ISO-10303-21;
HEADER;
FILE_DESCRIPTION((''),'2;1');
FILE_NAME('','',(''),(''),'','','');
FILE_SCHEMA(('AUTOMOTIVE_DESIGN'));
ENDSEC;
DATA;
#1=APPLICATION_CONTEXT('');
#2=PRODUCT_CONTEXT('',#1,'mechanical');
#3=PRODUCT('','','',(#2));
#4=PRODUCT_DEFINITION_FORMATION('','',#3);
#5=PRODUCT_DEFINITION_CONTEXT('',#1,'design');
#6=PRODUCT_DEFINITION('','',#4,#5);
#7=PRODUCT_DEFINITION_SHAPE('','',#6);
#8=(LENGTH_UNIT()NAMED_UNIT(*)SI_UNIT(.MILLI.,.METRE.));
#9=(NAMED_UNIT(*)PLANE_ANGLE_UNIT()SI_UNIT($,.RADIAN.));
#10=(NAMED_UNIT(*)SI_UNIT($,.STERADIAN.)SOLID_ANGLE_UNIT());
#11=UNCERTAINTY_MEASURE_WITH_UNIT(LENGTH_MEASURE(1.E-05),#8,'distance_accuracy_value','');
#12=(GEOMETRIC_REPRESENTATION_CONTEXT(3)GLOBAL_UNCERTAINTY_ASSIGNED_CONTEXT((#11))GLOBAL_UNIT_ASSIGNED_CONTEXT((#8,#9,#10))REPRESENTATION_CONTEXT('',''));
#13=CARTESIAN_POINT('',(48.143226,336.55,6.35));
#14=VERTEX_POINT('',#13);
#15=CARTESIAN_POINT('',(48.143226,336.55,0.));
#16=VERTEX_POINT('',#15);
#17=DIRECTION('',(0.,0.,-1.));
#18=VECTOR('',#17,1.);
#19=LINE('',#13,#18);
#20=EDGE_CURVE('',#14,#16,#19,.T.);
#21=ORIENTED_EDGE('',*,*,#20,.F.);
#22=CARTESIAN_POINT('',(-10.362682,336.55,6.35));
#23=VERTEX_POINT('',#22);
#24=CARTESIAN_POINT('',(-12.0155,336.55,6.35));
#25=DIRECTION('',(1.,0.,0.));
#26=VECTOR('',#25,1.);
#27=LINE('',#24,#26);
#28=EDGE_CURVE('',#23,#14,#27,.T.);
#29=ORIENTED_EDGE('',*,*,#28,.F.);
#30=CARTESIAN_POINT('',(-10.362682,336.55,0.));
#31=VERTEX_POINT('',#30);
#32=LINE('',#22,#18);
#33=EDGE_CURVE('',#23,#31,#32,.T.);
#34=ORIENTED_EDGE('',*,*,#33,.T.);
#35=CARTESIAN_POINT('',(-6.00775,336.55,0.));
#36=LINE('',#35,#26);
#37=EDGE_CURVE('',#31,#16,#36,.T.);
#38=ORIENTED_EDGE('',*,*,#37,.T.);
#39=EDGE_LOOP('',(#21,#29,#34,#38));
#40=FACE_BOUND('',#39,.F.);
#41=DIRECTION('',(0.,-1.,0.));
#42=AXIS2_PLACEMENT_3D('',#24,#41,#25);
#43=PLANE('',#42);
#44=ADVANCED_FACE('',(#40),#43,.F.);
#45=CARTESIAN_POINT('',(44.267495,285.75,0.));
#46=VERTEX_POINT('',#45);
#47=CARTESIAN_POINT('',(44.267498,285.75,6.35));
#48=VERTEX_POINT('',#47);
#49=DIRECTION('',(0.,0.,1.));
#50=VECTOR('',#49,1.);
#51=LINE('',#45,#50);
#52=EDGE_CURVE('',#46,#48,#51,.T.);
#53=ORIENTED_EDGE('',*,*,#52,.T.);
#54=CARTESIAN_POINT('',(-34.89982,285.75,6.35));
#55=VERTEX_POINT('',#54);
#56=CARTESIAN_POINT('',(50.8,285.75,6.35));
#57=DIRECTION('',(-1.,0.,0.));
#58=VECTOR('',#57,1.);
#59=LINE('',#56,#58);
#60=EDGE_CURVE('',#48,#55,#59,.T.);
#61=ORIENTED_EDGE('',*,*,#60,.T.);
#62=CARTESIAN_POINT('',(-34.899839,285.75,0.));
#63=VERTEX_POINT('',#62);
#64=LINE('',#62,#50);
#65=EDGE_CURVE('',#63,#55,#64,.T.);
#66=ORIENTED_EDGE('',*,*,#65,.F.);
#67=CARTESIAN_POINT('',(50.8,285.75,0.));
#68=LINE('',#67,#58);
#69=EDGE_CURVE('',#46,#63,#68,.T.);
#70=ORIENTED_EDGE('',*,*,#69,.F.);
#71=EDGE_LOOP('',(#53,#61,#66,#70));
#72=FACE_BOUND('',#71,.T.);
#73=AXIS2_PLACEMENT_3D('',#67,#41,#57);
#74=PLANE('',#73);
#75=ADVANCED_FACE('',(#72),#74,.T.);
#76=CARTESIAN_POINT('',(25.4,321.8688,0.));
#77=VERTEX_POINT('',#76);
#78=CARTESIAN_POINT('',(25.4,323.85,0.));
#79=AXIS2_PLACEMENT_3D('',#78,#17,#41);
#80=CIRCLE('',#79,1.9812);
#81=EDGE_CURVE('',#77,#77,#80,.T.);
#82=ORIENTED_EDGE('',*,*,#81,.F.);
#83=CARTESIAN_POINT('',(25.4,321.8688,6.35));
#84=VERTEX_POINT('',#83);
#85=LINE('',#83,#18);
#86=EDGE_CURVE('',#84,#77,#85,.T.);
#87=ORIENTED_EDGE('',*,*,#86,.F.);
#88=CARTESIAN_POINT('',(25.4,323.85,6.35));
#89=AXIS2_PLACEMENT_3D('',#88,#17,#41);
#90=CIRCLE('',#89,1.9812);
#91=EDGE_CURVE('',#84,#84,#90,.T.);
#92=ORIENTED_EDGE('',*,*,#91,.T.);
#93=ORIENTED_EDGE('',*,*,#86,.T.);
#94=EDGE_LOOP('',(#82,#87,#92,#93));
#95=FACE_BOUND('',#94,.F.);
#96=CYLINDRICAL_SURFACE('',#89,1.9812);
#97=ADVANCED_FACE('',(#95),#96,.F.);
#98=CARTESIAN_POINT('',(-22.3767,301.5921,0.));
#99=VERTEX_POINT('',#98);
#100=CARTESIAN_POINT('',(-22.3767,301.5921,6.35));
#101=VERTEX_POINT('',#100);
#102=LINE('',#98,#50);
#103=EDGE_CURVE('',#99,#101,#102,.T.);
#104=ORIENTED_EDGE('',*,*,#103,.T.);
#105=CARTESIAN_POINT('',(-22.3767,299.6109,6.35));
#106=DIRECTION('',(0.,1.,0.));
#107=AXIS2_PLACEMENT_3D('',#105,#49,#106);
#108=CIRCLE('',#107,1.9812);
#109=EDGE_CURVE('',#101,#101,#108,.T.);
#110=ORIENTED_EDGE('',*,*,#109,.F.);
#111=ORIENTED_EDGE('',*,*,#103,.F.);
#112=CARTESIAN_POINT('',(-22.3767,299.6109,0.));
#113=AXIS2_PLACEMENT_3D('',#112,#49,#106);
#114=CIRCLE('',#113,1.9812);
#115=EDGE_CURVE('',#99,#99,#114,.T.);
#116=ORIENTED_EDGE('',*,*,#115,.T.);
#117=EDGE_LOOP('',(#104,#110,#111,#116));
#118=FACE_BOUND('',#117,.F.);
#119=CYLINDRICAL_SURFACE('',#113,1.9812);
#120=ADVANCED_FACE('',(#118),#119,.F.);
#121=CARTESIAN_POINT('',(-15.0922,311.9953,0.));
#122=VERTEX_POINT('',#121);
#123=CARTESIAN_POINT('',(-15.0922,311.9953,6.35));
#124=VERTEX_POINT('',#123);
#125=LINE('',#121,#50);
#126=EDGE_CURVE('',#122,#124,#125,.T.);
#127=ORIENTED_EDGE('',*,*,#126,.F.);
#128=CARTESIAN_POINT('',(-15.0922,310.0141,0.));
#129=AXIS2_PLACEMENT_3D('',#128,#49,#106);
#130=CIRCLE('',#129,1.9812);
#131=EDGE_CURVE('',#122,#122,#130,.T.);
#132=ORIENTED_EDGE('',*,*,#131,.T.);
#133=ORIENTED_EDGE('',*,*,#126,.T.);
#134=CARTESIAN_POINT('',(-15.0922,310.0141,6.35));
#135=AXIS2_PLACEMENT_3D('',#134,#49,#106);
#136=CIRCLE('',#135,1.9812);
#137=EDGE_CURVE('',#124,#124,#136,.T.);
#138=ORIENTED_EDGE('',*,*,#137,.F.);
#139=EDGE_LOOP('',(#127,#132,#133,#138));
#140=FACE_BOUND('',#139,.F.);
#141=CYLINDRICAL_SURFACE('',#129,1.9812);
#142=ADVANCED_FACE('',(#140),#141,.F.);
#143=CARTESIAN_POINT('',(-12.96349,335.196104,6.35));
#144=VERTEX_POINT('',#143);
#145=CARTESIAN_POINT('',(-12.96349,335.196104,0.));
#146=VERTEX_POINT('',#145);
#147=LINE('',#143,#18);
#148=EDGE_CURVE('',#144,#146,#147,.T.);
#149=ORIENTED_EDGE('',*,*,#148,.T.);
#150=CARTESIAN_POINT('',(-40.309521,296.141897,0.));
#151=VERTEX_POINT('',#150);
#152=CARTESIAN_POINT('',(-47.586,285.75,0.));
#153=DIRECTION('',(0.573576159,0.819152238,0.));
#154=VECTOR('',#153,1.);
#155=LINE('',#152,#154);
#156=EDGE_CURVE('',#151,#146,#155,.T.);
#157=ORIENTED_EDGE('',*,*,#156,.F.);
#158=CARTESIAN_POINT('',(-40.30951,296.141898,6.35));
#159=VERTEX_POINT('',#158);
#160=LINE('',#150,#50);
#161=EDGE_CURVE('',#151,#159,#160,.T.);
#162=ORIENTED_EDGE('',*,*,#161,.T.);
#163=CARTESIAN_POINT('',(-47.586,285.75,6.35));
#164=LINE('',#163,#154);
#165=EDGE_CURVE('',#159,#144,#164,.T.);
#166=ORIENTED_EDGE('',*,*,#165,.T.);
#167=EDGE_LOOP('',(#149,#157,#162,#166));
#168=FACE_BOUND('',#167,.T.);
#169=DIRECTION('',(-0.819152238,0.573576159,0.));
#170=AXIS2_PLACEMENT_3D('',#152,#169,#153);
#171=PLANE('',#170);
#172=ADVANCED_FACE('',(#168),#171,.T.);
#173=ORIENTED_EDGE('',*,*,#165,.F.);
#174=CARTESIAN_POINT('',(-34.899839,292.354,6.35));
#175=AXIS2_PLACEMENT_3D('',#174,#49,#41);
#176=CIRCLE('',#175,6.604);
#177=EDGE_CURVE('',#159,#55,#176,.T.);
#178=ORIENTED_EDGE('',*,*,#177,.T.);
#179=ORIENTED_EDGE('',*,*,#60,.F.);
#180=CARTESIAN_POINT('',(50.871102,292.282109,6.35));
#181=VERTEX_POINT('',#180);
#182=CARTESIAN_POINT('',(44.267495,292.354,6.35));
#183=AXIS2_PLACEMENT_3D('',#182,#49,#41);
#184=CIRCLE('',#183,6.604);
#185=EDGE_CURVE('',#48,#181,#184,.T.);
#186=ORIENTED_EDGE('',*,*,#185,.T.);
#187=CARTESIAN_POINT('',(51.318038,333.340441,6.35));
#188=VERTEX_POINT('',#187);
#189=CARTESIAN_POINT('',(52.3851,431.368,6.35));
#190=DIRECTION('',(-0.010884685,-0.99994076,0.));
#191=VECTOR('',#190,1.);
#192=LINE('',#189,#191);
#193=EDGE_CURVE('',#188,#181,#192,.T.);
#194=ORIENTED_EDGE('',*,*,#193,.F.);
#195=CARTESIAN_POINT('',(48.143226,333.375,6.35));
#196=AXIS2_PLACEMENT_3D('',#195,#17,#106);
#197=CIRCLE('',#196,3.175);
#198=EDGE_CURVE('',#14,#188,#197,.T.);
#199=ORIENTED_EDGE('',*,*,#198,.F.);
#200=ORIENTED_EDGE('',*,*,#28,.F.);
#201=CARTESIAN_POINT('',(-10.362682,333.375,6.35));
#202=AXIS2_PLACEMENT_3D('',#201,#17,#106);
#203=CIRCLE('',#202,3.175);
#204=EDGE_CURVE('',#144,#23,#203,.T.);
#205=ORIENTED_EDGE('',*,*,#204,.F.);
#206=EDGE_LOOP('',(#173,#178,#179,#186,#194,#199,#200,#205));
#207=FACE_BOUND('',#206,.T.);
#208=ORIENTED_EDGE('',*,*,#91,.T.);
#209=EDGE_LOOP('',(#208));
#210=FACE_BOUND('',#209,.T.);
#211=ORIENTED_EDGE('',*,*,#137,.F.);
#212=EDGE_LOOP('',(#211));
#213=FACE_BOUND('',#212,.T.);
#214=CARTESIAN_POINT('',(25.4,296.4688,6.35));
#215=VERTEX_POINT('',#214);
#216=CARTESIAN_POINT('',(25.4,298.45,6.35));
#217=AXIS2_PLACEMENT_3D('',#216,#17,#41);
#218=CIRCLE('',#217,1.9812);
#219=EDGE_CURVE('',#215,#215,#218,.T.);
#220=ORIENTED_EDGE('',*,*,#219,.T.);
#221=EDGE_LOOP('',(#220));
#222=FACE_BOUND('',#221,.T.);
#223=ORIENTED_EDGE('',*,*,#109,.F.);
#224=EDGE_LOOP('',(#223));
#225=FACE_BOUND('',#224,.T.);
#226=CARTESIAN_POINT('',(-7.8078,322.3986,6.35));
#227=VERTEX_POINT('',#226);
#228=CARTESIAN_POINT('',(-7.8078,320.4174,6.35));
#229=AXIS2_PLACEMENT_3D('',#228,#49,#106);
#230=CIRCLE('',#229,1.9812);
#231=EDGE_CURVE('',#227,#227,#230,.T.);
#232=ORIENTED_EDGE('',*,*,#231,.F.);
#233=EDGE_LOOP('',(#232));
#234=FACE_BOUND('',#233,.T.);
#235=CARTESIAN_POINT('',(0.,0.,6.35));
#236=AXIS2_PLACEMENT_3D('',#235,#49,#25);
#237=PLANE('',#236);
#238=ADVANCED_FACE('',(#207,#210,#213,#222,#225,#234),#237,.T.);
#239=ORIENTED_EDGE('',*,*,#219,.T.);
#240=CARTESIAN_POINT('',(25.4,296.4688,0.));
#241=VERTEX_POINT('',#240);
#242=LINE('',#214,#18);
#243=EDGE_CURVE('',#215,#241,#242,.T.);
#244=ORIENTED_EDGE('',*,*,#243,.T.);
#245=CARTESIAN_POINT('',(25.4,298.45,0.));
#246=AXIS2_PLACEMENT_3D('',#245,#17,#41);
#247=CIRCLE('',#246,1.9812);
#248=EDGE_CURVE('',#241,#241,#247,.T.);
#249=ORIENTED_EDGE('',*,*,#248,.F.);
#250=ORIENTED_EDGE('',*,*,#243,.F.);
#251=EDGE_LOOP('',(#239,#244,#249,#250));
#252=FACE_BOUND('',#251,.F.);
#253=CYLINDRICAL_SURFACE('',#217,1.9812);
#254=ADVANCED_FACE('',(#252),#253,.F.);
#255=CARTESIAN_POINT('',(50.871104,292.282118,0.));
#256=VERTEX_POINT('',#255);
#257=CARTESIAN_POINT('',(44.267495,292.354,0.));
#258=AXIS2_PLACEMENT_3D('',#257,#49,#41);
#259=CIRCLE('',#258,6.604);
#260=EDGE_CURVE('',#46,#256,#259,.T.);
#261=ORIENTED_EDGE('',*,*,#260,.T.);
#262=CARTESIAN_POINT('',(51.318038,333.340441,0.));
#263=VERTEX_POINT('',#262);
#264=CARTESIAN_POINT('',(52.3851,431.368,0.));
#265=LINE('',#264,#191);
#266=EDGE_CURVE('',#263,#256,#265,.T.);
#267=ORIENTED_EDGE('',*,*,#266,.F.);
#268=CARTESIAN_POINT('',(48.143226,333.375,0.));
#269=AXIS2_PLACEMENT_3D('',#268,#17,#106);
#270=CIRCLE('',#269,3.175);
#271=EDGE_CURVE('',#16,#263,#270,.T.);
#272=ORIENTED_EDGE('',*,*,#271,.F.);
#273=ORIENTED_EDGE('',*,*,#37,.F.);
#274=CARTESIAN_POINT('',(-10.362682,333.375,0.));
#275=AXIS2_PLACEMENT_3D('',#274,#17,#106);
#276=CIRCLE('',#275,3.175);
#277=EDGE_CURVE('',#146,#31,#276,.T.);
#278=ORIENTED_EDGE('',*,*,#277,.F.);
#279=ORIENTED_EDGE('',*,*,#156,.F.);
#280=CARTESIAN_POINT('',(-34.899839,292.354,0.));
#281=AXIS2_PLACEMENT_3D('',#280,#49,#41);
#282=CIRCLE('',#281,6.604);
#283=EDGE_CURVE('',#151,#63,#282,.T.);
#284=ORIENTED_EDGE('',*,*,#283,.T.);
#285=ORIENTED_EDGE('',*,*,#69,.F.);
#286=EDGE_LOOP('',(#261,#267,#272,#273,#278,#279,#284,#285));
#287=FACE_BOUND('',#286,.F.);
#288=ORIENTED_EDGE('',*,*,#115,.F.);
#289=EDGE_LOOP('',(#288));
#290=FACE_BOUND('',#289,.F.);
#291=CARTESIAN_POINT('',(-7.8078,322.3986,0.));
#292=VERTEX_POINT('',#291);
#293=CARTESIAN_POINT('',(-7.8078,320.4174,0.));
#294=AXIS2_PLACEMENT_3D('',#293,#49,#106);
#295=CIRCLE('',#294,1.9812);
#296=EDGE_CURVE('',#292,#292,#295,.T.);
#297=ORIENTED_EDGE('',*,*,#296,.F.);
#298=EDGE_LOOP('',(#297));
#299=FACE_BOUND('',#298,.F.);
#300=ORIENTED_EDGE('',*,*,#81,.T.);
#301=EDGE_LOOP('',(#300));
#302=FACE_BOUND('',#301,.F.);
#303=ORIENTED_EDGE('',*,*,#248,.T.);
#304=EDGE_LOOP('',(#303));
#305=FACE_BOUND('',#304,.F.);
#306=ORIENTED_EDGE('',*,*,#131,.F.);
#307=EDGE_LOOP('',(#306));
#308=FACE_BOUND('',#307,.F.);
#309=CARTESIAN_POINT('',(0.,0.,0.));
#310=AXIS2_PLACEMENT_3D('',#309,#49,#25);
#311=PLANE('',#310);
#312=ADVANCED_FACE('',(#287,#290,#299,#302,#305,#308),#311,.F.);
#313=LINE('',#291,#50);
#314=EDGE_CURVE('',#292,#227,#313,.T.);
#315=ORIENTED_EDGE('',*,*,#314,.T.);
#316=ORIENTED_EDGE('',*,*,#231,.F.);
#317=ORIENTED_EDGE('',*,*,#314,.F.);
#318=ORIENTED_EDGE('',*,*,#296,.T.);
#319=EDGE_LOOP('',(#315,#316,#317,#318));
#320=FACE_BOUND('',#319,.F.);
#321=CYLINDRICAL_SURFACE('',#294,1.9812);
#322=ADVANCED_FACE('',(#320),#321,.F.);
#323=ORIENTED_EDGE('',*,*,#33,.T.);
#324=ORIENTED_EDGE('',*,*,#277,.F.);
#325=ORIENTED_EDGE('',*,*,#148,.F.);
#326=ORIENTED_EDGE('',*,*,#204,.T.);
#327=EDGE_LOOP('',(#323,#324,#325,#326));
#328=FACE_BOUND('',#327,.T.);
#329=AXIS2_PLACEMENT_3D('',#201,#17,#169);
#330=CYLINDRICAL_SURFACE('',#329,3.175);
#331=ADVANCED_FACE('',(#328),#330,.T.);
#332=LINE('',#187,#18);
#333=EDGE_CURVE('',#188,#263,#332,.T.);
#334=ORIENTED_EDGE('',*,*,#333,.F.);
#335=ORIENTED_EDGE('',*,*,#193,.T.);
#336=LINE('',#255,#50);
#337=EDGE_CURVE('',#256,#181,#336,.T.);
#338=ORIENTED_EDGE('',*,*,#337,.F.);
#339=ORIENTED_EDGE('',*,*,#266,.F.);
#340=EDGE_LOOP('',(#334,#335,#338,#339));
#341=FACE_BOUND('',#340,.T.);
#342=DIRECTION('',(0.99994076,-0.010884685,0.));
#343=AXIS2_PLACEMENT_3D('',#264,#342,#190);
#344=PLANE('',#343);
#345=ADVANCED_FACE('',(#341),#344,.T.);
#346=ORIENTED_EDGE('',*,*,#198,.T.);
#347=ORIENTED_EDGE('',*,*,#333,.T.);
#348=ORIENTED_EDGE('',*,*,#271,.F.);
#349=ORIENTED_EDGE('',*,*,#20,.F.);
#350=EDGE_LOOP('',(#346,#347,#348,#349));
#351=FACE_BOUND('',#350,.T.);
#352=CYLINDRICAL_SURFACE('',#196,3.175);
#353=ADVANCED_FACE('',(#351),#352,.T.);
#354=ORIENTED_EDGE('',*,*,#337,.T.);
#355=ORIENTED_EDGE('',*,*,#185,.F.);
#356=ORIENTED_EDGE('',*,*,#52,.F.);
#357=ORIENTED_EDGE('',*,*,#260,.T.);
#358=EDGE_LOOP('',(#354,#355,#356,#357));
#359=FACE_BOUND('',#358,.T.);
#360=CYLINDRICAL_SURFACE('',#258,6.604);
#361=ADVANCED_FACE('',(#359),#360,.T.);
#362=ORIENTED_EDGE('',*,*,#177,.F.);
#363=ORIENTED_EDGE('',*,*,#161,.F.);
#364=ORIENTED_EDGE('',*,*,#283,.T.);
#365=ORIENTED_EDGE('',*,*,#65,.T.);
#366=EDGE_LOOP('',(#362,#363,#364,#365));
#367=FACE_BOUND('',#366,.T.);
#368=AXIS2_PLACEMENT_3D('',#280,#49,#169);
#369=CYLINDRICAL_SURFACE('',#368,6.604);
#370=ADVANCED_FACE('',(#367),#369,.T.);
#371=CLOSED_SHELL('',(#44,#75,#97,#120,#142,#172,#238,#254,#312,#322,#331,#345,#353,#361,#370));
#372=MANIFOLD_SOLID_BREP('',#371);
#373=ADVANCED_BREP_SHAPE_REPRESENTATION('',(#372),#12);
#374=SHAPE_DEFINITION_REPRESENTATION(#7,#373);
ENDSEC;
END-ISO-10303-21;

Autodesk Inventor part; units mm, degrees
ref_plane "YZ Plane" through (0, 0, 0) normal (1, 0, 0) x (0, 1, 0)
ref_plane "XZ Plane" through (0, 0, 0) normal (0, 1, 0) x (-1, 0, 0)
ref_plane "XY Plane" through (0, 0, 0) normal (0, 0, 1) x (1, 0, 0)
sketch "Sketch1" plane through (0, 0, 0) normal (0, 0, 1) x (1, 0, 0)
  line L0 (0, 0) -> (50.8, 0) construction
  line L1 (50.8, 0) -> (50.8, 387.35) construction
  line L2 (50.8, 387.35) -> (0, 387.35) construction
  line L3 (0, 387.35) -> (0, 0) construction
  line L4 (20.8065, 339.141) -> (-226.8638, -14.5688) construction
  line L5 (-226.8638, -14.5688) -> (-247.6703, 0) construction
  line L6 (-247.6703, 0) -> (0, 353.7099) construction
  line L7 (0, 353.7099) -> (20.8065, 339.141) construction
  line L8 (-247.6703, 0) -> (-216.6626, 0) construction
  line L9 (0, 353.7099) -> (0, 309.4263) construction
  dimension "d0" = 50.8
  dimension "d1" = 387.35
  dimension "d2" = 25.4
  dimension "d3" = 431.8
  dimension "d5" = 55
sketch "Sketch2" plane through (0, 0, 0) normal (0, 0, 1) x (1, 0, 0)
  line L0 (0, 0) -> (50.8, 0) construction
  line L1 (50.8, 0) -> (50.8, 387.35) construction
  line L2 (50.8, 387.35) -> (0, 387.35) construction
  line L3 (0, 387.35) -> (0, 0) construction
  line L4 (20.8065, 339.141) -> (-226.8638, -14.5688) construction
  line L5 (-226.8638, -14.5688) -> (-247.6703, 0) construction
  line L6 (-247.6703, 0) -> (0, 353.7099) construction
  line L7 (0, 353.7099) -> (20.8065, 339.141) construction
  line L8 (-247.6703, 0) -> (-216.6626, 0) construction
  line L9 (0, 353.7099) -> (0, 309.4263) construction
  circle A0 centre (12.7, 431.8) radius 11.176
  circle A1 centre (12.7, 431.8) radius 23.8125 construction
  circle A2 centre (12.7, 431.8) radius 39.6875 construction
  line L10 (-47.586, 285.75) -> (0, 353.7099)
  line L11 (0, 387.35) -> (0, 353.7099)
  line L12 (0, 387.35) -> (-16.2292, 404.6302)
  line L13 (52.3851, 431.368) -> (50.8, 285.75)
  line L14 (50.8, 285.75) -> (-47.586, 285.75)
  arc A3 (52.3851, 431.368) -> (-16.2292, 404.6302) centre (12.7, 431.8) ccw
  line L15 (12.7, 374.65) -> (38.1, 374.65) construction
  line L16 (10.4032, 346.4254) -> (-237.2671, -7.2844) construction
  point P0 (25.4, 0)
  point P1 (-7.8078, 320.4174)
  point P2 (-15.0922, 310.0141)
  point P3 (-22.3767, 299.6109)
  point P4 (25.4, 374.65)
  point P5 (25.4, 374.65)
  point P6 (25.4, 387.35)
  dimension "d6" = 22.352
  dimension "d7" = 47.625
  dimension "d8" = 15.875
  dimension "d10" = 12.7
  dimension "d11" = 431.8
  dimension "d12" = 101.6
  dimension "d13" = 25.4
  dimension "d14" = 12.7
  dimension "d15" = 12.7
  dimension "d16" = 12.7
  dimension "d56" = 31.75
extrude "Extrusion1" add sketch "Sketch2" along normal blind 6.35
hole "Hole1" at (0, 0, 0) at (50.8, 0, 0) at (-226.8638, -14.5688, 0) at (-247.6703, 0, 0) at (-216.6626, 0, 0) at (-7.8078, 320.4174, 0) at (-15.0922, 310.0141, 0) at (-22.3767, 299.6109, 0) at (12.7, 374.65, 0) at (25.4, 374.65, 0) at (38.1, 374.65, 0) direction (0, 0, 1) diameter 3.9624 end through all thread size "10-32 UNF" class "2B" standard "ANSI Unified Screw Threads"
fillet "Fillet1" radius 6.604 3 edges at (0, 353.7099, 3.175) (-47.586, 285.75, 3.175) (50.8, 285.75, 3.175)
sketch "Sketch3" plane through (0, 0, 0) normal (0, 0, -1) x (-1, 0, 0)
  arc A0 (-50.8711, 292.2821) -> (-44.2675, 285.75) centre (-44.2675, 292.354) ccw construction
  line L0 (34.8998, 285.75) -> (-44.2675, 285.75) construction
  arc A1 (34.8998, 285.75) -> (40.3095, 296.1419) centre (34.8998, 292.354) ccw construction
  line L1 (1.1943, 352.0042) -> (40.3095, 296.1419) construction
  arc A2 (0, 355.7921) -> (1.1943, 352.0042) centre (6.604, 355.7921) ccw construction
  line L2 (0, 387.35) -> (0, 355.7921) construction
  line L3 (16.2292, 404.6302) -> (0, 387.35) construction
  arc A3 (16.2292, 404.6302) -> (-52.3851, 431.368) centre (-12.7, 431.8) ccw construction
  line L4 (-50.8711, 292.2821) -> (-52.3851, 431.368) construction
  circle A4 centre (-25.4, 374.65) radius 1.9812 construction
  circle A5 centre (22.3767, 299.6109) radius 1.9812 construction
  circle A6 centre (7.8078, 320.4174) radius 1.9812 construction
  circle A7 centre (15.0922, 310.0141) radius 1.9812 construction
  circle A8 centre (-12.7, 374.65) radius 1.9812 construction
  circle A9 centre (-38.1, 374.65) radius 1.9812 construction
  circle A10 centre (-12.7, 431.8) radius 11.176 construction
  circle A11 centre (-12.7, 431.8) radius 23.8125
  circle A12 centre (-12.7, 431.8) radius 11.176 construction
  circle A13 centre (-12.7, 431.8) radius 31.75 construction
  point P0 (0, 0)
  point P1 (-12.7, 463.55)
  point P2 (-44.45, 431.8)
  point P3 (-12.7, 400.05)
  point P4 (19.05, 431.8)
  dimension "d29" = 63.5
  dimension "d28" = 47.625
  dimension "d32" = 360
extrude "Extrusion2" cut sketch "Sketch3" against normal blind 3.175
hole "Hole2" at (12.7, 463.55, 0) at (44.45, 431.8, 0) at (12.7, 400.05, 0) at (-19.05, 431.8, 0) direction (0, 0, 1) diameter 3.9624 end through all thread size "10-32 UNF" class "2B" standard "ANSI Unified Screw Threads"
sketch "Sketch4" plane through (0, 0, 6.35) normal (0, 0, 1) x (1, 0, 0)
  line L0 (-1.1943, 352.0042) -> (-40.3095, 296.1419) projected
  line L1 (-12.0155, 336.55) -> (51.353, 336.55)
  line L2 (50.8711, 292.2821) -> (52.3851, 431.368) projected
  line L3 (-34.8998, 285.75) -> (44.2675, 285.75) projected
  arc A0 (-40.3095, 296.1419) -> (-34.8998, 285.75) centre (-34.8998, 292.354) ccw projected
  arc A1 (44.2675, 285.75) -> (50.8711, 292.2821) centre (44.2675, 292.354) ccw projected
  point P0 (0, 0)
  dimension "d43" = 50.8
extrude "Extrusion3" cut sketch "Sketch4" against normal through all keep common part
fillet "Fillet2" radius 3.175 2 edges at (-12.0155, 336.55, 3.175) (51.353, 336.55, 3.175)
sketch "Sketch5" plane through (0, 0, 6.35) normal (0, 0, 1) x (1, 0, 0)
  line L0 (50.8, 387.35) -> (0, 387.35) construction
  line L1 (25.4, 323.85) -> (25.4, 298.45) construction
  line L2 (-34.8998, 285.75) -> (44.2675, 285.75) construction
  point P0 (0, 0)
  point P1 (25.4, 387.35)
  dimension "d47" = 25.4
  dimension "d48" = 12.7
hole "Hole3" at (25.4, 323.85, 6.35) at (25.4, 298.45, 6.35) direction (0, 0, -1) diameter 3.9624 end through all thread size "10-32 UNF" class "2B" standard "ANSI Unified Screw Threads"
properties part number "CL7-011" material "Aluminum 6061"
